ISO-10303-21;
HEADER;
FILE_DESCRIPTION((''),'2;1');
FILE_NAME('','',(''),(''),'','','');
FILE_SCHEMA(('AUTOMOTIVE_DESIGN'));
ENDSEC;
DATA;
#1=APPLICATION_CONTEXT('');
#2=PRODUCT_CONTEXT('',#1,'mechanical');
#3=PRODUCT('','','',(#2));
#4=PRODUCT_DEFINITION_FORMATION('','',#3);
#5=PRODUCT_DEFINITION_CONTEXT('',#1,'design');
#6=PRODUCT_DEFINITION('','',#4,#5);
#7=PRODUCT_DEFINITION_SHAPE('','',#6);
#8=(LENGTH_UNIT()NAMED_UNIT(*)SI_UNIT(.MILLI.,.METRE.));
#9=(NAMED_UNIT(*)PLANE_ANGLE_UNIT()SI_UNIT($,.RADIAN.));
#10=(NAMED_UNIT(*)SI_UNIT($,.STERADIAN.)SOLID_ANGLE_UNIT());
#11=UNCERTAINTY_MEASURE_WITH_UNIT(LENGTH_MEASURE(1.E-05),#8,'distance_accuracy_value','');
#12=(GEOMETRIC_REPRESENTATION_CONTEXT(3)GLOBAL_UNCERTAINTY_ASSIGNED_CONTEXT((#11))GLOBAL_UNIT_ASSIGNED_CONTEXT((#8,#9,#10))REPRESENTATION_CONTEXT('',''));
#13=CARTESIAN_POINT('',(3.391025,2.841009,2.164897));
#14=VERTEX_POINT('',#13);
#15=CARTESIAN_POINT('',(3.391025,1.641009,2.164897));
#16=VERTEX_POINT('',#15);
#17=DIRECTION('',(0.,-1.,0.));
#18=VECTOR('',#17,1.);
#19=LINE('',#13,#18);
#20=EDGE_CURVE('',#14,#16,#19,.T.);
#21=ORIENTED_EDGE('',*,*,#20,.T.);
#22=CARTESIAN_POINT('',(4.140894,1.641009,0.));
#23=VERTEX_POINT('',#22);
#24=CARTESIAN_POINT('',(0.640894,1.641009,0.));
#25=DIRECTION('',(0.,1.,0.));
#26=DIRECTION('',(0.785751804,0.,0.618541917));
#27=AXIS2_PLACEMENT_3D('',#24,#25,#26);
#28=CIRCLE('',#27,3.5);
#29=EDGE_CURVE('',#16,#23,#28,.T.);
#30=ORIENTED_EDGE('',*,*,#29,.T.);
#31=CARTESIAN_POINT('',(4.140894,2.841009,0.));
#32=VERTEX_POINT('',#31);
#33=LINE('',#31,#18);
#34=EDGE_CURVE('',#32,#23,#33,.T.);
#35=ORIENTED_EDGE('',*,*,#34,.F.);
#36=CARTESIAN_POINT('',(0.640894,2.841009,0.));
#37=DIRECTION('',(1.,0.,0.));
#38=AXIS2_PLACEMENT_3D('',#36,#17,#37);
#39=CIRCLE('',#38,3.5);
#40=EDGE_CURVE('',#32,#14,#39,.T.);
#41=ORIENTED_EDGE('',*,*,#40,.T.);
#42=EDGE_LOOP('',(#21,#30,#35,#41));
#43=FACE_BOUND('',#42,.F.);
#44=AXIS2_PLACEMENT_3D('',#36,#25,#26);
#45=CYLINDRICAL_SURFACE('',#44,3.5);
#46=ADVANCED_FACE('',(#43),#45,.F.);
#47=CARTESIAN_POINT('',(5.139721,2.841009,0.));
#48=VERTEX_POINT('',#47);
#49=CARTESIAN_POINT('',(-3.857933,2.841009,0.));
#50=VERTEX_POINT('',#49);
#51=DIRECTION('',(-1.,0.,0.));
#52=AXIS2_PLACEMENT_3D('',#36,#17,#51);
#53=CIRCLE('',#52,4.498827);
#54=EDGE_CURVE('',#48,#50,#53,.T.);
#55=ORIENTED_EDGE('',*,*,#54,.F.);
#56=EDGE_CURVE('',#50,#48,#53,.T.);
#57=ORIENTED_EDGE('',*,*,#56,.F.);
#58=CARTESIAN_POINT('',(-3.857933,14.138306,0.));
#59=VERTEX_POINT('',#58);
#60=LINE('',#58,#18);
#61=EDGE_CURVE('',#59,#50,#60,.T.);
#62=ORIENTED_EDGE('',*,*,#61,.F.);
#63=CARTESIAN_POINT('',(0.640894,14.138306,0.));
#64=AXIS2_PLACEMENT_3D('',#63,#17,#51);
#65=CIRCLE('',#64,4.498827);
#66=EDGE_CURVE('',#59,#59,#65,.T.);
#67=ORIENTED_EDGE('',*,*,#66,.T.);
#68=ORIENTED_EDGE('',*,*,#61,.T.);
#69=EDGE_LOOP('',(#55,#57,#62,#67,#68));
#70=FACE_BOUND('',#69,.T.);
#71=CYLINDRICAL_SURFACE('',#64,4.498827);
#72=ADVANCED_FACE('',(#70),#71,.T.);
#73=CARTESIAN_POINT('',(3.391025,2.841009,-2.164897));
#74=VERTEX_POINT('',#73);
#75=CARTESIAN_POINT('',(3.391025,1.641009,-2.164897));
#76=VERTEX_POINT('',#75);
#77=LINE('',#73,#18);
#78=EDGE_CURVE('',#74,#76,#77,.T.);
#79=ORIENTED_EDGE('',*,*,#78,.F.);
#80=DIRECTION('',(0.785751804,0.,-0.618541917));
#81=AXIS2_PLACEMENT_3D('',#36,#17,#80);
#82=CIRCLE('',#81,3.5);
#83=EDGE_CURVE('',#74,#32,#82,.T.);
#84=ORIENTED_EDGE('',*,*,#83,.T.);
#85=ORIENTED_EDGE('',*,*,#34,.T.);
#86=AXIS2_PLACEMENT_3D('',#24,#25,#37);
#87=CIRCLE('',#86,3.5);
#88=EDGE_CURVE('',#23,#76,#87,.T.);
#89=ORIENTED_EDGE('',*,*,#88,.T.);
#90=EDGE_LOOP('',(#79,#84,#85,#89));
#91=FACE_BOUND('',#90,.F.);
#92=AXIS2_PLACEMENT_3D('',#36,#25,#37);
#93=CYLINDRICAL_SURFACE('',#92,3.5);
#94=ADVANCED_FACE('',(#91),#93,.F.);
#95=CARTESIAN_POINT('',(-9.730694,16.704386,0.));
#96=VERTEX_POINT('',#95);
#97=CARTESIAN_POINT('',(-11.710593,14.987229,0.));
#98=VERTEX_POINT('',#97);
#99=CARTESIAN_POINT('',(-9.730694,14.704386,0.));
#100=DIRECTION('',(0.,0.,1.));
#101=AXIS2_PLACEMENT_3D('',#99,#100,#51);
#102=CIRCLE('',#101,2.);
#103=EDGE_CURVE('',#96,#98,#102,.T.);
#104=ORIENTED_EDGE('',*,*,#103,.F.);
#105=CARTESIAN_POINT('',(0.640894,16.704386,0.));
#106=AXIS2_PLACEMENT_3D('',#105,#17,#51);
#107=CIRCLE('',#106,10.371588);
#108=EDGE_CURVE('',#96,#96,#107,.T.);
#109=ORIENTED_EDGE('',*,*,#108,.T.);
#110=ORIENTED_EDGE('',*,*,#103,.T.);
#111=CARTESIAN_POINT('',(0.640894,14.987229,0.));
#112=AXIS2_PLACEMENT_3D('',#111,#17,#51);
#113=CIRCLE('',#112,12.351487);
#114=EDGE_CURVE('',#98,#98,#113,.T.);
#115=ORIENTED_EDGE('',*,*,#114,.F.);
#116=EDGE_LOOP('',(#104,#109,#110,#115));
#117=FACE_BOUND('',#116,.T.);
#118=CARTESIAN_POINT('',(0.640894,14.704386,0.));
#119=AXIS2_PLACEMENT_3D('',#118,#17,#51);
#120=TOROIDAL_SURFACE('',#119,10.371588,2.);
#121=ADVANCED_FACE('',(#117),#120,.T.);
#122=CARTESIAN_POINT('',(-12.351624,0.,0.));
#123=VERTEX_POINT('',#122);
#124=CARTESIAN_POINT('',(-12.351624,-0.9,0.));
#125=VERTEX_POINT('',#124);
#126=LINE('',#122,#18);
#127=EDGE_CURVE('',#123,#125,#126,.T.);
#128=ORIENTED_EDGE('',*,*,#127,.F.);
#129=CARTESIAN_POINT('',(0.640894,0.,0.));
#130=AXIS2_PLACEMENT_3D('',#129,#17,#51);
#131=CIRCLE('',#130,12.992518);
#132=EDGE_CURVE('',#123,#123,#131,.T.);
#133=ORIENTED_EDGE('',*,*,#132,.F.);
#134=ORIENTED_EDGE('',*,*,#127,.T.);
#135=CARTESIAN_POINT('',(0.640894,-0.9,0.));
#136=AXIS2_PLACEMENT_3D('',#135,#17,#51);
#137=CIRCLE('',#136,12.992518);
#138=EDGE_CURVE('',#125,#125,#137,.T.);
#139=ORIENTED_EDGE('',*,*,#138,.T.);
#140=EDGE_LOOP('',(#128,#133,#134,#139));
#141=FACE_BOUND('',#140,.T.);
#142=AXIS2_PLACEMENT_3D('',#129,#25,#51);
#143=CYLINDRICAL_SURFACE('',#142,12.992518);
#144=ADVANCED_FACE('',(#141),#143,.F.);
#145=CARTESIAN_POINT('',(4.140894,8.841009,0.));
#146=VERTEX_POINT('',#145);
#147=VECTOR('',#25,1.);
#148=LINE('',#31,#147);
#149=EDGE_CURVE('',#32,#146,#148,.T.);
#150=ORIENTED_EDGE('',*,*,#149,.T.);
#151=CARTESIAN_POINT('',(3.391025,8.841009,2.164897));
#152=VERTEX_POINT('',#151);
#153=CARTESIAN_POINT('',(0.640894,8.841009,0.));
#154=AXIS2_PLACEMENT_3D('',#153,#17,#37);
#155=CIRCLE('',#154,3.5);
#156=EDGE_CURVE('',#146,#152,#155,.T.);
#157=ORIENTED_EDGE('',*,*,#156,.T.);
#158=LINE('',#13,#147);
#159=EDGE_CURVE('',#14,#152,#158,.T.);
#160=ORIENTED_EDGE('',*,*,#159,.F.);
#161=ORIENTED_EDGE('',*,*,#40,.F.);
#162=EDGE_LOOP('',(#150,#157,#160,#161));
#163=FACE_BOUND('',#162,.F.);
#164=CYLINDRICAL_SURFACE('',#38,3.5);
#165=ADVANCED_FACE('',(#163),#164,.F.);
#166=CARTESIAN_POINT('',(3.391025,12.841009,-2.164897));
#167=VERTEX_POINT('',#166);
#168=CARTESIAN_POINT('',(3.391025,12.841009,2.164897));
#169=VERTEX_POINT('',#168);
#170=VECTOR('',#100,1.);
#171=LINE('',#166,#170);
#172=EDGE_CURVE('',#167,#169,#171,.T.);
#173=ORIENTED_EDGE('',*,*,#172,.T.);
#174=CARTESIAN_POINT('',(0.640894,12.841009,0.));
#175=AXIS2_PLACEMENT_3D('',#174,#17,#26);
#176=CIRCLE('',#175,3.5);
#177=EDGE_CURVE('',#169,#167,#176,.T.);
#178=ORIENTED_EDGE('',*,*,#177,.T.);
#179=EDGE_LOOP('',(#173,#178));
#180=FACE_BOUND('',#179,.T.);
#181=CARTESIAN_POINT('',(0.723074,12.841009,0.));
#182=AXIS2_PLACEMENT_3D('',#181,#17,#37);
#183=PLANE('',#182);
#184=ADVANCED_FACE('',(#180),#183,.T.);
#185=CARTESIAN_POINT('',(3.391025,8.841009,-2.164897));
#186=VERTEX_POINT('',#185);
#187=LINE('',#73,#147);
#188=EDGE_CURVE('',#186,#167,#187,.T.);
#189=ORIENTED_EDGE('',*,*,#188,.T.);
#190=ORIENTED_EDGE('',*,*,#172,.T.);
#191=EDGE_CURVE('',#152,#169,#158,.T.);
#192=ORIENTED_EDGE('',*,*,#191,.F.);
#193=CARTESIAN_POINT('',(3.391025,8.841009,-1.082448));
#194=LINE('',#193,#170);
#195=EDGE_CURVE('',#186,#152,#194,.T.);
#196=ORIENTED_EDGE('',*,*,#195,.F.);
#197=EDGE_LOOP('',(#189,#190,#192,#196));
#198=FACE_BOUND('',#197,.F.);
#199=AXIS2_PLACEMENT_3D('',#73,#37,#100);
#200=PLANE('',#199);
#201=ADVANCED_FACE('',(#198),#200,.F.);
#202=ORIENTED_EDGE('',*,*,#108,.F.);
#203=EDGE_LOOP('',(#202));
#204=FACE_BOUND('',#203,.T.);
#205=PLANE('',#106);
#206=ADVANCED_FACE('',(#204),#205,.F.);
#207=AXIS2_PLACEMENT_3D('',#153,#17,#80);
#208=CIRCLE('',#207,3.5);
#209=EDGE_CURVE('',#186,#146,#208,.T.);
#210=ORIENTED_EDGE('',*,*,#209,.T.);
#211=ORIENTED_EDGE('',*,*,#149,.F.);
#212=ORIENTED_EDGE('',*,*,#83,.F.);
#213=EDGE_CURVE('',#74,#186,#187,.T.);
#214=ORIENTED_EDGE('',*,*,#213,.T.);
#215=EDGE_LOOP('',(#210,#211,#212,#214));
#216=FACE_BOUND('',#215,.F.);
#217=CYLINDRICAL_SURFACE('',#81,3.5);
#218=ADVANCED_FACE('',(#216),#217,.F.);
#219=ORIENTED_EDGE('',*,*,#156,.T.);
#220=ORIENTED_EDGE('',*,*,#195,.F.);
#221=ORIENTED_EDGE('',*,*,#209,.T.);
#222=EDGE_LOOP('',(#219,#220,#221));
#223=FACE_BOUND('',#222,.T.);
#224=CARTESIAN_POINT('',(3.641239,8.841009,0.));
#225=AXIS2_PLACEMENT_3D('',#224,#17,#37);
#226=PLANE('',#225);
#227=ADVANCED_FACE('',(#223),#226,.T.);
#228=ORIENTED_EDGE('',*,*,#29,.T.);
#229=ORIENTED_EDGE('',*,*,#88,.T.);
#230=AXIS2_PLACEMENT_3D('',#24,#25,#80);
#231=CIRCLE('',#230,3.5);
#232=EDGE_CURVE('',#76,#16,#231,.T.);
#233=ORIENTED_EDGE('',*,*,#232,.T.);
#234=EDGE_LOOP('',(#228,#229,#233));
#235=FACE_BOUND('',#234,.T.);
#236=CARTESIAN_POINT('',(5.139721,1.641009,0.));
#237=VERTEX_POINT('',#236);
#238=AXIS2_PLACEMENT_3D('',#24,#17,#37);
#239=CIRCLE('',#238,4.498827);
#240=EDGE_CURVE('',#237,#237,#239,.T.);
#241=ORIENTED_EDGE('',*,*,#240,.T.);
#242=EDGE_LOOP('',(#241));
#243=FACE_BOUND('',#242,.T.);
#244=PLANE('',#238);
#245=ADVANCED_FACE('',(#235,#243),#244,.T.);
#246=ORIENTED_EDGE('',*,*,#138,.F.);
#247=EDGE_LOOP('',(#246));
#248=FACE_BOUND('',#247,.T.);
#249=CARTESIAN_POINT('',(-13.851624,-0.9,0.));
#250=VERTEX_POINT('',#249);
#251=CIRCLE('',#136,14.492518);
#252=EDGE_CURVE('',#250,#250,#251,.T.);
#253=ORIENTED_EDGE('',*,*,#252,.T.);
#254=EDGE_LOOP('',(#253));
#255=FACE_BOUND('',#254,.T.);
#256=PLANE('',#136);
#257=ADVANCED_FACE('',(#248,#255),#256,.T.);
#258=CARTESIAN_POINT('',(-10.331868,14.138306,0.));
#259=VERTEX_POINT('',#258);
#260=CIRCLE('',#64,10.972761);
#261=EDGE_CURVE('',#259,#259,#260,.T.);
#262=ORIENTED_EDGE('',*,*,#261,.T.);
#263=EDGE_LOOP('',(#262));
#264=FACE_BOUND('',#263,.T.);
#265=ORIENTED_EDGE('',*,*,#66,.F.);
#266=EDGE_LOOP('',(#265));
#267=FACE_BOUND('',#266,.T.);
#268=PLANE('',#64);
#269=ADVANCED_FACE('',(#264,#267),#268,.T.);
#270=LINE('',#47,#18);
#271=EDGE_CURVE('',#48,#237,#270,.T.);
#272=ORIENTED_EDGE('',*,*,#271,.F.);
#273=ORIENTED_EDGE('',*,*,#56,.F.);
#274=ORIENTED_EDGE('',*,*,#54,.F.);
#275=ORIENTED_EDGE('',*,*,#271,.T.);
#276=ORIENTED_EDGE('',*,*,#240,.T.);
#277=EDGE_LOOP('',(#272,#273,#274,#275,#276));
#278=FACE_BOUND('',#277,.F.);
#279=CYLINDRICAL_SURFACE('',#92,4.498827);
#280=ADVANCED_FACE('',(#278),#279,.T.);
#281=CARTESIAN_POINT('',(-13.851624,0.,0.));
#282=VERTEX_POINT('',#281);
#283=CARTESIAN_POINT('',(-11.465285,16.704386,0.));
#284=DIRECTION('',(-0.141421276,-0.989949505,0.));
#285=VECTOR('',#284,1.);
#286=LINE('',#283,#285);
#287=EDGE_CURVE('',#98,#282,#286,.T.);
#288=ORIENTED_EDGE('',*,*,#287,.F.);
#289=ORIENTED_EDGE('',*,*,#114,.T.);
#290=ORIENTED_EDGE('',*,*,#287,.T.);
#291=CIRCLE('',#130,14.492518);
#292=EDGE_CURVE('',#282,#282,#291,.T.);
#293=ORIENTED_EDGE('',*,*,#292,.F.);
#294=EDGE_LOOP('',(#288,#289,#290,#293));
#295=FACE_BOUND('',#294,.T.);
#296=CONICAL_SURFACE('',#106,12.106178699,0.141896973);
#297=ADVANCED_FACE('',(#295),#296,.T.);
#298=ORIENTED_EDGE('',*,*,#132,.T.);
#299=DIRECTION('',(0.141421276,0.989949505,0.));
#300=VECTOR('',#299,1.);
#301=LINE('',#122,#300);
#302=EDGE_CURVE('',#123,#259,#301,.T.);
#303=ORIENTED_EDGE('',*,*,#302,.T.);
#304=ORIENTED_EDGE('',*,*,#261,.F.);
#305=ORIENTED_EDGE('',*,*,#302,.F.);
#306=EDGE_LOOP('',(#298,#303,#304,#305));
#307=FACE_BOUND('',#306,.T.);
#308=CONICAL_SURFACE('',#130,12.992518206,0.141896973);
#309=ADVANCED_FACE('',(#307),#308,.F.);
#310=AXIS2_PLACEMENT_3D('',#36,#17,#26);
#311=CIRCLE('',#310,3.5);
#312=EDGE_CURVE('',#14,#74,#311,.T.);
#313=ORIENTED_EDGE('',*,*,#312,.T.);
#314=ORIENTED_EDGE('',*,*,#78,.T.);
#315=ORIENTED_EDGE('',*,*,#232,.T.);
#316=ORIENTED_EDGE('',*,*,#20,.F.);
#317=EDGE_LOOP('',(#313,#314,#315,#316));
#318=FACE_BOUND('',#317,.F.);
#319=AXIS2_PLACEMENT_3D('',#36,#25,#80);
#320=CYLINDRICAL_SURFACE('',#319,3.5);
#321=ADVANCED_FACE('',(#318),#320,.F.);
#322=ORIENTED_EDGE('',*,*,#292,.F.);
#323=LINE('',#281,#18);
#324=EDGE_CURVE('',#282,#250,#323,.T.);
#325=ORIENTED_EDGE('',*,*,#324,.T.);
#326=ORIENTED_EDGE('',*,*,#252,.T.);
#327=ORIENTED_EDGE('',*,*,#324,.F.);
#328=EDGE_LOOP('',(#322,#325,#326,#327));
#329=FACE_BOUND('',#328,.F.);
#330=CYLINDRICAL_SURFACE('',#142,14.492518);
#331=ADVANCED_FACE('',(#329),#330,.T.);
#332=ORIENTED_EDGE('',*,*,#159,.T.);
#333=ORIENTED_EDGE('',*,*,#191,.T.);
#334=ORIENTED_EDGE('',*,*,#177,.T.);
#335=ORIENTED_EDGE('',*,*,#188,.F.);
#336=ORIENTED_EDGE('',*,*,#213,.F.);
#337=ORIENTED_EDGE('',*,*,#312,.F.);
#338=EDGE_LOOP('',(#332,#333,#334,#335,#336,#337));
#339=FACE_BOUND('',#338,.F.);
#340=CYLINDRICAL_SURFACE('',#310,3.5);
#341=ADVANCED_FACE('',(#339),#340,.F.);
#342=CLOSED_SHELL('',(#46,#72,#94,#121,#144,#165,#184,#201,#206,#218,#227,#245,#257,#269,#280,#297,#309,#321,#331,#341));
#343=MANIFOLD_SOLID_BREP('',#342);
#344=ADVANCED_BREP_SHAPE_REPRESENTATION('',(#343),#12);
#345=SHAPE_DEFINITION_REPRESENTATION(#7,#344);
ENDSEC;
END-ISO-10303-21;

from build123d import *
from build123d import SkipClean  # not in build123d's __all__

# Parameters (mm, degrees)
F2_R     = 2
F4_DEPTH = 6
F5_DEPTH = 10
F6_DEPTH = 0.9
F3_R     = 4.4988269867
F7_DEPTH = 1.2


with BuildPart() as f1:
    # F0 (on Top) → F1 (revolve)
    with BuildSketch(Plane.XY):
        Polygon((0.6408938694, 2.8410089679), (0.6408938694, 16.7043862722), (-11.46528483, 16.7043862722), (-13.8516243371, 0), (-12.3516243371, 0), (-10.3318675491, 14.1383057447), (-3.8579331173, 14.1383057447), (-3.8579331173, 2.8410089679), align=None)
    revolve(axis=Axis((0.6408938694, 3.1900271702, 0), (0, -1, 0)))

    # F2
    f2_edges = [f1.edges().sort_by_distance(p)[0] for p in [
        (12.747073, 16.704386, 0),
    ]]
    fillet(f2_edges, radius=F2_R)

    # F3 (on face) → F4 (cut)
    with BuildSketch(Plane.XZ.offset(-2.8410089679)):
        with BuildLine():
            ThreePointArc((3.3910251828, -2.1648967087), (3.9481177503, -1.1455436271), (4.1408938694, 0))
            ThreePointArc((4.1408938694, 0), (3.9481177503, 1.1455436271), (3.3910251828, 2.1648967087))
            Line((3.3910251828, 2.1648967087), (3.3910251828, -2.1648967087))
        make_face()
        with BuildLine():
            Line((3.3910251828, -2.1648967087), (3.3910251828, 2.1648967087))
            ThreePointArc((3.3910251828, 2.1648967087), (-2.8591061306, 0), (3.3910251828, -2.1648967087))
        make_face()
    extrude(amount=-F4_DEPTH, mode=Mode.SUBTRACT)

    # F3 (on face) → F5 (cut)
    with BuildSketch(Plane.XZ.offset(-2.8410089679)):
        with BuildLine():
            Line((3.3910251828, -2.1648967087), (3.3910251828, 2.1648967087))
            ThreePointArc((3.3910251828, 2.1648967087), (-2.8591061306, 0), (3.3910251828, -2.1648967087))
        make_face()
    extrude(amount=-F5_DEPTH, mode=Mode.SUBTRACT)

    # F6 (add): a face of the model
    f6_faces = [f1.faces().sort_by_distance(p)[0] for p in [
        (14.72350176, 0, 0),
    ]]
    extrude(f6_faces, amount=F6_DEPTH)

    # F3 (on face) → F7 (join)
    with BuildSketch(Plane.XZ.offset(-2.8410089679)):
        with Locations((0.6408938694, 0)):
            Circle(F3_R)
        with BuildLine():
            ThreePointArc((3.3910251828, 2.1648967087), (3.9481177503, 1.1455436271), (4.1408938694, 0))
            ThreePointArc((4.1408938694, 0), (3.9481177503, -1.1455436271), (3.3910251828, -2.1648967087))
            ThreePointArc((3.3910251828, -2.1648967087), (-2.8591061306, 0), (3.3910251828, 2.1648967087))
        make_face(mode=Mode.SUBTRACT)
    with SkipClean():  # cleaning this boolean's faces spoils the solid; the shape is the same uncleaned
        extrude(amount=F7_DEPTH)


solid = f1.part
